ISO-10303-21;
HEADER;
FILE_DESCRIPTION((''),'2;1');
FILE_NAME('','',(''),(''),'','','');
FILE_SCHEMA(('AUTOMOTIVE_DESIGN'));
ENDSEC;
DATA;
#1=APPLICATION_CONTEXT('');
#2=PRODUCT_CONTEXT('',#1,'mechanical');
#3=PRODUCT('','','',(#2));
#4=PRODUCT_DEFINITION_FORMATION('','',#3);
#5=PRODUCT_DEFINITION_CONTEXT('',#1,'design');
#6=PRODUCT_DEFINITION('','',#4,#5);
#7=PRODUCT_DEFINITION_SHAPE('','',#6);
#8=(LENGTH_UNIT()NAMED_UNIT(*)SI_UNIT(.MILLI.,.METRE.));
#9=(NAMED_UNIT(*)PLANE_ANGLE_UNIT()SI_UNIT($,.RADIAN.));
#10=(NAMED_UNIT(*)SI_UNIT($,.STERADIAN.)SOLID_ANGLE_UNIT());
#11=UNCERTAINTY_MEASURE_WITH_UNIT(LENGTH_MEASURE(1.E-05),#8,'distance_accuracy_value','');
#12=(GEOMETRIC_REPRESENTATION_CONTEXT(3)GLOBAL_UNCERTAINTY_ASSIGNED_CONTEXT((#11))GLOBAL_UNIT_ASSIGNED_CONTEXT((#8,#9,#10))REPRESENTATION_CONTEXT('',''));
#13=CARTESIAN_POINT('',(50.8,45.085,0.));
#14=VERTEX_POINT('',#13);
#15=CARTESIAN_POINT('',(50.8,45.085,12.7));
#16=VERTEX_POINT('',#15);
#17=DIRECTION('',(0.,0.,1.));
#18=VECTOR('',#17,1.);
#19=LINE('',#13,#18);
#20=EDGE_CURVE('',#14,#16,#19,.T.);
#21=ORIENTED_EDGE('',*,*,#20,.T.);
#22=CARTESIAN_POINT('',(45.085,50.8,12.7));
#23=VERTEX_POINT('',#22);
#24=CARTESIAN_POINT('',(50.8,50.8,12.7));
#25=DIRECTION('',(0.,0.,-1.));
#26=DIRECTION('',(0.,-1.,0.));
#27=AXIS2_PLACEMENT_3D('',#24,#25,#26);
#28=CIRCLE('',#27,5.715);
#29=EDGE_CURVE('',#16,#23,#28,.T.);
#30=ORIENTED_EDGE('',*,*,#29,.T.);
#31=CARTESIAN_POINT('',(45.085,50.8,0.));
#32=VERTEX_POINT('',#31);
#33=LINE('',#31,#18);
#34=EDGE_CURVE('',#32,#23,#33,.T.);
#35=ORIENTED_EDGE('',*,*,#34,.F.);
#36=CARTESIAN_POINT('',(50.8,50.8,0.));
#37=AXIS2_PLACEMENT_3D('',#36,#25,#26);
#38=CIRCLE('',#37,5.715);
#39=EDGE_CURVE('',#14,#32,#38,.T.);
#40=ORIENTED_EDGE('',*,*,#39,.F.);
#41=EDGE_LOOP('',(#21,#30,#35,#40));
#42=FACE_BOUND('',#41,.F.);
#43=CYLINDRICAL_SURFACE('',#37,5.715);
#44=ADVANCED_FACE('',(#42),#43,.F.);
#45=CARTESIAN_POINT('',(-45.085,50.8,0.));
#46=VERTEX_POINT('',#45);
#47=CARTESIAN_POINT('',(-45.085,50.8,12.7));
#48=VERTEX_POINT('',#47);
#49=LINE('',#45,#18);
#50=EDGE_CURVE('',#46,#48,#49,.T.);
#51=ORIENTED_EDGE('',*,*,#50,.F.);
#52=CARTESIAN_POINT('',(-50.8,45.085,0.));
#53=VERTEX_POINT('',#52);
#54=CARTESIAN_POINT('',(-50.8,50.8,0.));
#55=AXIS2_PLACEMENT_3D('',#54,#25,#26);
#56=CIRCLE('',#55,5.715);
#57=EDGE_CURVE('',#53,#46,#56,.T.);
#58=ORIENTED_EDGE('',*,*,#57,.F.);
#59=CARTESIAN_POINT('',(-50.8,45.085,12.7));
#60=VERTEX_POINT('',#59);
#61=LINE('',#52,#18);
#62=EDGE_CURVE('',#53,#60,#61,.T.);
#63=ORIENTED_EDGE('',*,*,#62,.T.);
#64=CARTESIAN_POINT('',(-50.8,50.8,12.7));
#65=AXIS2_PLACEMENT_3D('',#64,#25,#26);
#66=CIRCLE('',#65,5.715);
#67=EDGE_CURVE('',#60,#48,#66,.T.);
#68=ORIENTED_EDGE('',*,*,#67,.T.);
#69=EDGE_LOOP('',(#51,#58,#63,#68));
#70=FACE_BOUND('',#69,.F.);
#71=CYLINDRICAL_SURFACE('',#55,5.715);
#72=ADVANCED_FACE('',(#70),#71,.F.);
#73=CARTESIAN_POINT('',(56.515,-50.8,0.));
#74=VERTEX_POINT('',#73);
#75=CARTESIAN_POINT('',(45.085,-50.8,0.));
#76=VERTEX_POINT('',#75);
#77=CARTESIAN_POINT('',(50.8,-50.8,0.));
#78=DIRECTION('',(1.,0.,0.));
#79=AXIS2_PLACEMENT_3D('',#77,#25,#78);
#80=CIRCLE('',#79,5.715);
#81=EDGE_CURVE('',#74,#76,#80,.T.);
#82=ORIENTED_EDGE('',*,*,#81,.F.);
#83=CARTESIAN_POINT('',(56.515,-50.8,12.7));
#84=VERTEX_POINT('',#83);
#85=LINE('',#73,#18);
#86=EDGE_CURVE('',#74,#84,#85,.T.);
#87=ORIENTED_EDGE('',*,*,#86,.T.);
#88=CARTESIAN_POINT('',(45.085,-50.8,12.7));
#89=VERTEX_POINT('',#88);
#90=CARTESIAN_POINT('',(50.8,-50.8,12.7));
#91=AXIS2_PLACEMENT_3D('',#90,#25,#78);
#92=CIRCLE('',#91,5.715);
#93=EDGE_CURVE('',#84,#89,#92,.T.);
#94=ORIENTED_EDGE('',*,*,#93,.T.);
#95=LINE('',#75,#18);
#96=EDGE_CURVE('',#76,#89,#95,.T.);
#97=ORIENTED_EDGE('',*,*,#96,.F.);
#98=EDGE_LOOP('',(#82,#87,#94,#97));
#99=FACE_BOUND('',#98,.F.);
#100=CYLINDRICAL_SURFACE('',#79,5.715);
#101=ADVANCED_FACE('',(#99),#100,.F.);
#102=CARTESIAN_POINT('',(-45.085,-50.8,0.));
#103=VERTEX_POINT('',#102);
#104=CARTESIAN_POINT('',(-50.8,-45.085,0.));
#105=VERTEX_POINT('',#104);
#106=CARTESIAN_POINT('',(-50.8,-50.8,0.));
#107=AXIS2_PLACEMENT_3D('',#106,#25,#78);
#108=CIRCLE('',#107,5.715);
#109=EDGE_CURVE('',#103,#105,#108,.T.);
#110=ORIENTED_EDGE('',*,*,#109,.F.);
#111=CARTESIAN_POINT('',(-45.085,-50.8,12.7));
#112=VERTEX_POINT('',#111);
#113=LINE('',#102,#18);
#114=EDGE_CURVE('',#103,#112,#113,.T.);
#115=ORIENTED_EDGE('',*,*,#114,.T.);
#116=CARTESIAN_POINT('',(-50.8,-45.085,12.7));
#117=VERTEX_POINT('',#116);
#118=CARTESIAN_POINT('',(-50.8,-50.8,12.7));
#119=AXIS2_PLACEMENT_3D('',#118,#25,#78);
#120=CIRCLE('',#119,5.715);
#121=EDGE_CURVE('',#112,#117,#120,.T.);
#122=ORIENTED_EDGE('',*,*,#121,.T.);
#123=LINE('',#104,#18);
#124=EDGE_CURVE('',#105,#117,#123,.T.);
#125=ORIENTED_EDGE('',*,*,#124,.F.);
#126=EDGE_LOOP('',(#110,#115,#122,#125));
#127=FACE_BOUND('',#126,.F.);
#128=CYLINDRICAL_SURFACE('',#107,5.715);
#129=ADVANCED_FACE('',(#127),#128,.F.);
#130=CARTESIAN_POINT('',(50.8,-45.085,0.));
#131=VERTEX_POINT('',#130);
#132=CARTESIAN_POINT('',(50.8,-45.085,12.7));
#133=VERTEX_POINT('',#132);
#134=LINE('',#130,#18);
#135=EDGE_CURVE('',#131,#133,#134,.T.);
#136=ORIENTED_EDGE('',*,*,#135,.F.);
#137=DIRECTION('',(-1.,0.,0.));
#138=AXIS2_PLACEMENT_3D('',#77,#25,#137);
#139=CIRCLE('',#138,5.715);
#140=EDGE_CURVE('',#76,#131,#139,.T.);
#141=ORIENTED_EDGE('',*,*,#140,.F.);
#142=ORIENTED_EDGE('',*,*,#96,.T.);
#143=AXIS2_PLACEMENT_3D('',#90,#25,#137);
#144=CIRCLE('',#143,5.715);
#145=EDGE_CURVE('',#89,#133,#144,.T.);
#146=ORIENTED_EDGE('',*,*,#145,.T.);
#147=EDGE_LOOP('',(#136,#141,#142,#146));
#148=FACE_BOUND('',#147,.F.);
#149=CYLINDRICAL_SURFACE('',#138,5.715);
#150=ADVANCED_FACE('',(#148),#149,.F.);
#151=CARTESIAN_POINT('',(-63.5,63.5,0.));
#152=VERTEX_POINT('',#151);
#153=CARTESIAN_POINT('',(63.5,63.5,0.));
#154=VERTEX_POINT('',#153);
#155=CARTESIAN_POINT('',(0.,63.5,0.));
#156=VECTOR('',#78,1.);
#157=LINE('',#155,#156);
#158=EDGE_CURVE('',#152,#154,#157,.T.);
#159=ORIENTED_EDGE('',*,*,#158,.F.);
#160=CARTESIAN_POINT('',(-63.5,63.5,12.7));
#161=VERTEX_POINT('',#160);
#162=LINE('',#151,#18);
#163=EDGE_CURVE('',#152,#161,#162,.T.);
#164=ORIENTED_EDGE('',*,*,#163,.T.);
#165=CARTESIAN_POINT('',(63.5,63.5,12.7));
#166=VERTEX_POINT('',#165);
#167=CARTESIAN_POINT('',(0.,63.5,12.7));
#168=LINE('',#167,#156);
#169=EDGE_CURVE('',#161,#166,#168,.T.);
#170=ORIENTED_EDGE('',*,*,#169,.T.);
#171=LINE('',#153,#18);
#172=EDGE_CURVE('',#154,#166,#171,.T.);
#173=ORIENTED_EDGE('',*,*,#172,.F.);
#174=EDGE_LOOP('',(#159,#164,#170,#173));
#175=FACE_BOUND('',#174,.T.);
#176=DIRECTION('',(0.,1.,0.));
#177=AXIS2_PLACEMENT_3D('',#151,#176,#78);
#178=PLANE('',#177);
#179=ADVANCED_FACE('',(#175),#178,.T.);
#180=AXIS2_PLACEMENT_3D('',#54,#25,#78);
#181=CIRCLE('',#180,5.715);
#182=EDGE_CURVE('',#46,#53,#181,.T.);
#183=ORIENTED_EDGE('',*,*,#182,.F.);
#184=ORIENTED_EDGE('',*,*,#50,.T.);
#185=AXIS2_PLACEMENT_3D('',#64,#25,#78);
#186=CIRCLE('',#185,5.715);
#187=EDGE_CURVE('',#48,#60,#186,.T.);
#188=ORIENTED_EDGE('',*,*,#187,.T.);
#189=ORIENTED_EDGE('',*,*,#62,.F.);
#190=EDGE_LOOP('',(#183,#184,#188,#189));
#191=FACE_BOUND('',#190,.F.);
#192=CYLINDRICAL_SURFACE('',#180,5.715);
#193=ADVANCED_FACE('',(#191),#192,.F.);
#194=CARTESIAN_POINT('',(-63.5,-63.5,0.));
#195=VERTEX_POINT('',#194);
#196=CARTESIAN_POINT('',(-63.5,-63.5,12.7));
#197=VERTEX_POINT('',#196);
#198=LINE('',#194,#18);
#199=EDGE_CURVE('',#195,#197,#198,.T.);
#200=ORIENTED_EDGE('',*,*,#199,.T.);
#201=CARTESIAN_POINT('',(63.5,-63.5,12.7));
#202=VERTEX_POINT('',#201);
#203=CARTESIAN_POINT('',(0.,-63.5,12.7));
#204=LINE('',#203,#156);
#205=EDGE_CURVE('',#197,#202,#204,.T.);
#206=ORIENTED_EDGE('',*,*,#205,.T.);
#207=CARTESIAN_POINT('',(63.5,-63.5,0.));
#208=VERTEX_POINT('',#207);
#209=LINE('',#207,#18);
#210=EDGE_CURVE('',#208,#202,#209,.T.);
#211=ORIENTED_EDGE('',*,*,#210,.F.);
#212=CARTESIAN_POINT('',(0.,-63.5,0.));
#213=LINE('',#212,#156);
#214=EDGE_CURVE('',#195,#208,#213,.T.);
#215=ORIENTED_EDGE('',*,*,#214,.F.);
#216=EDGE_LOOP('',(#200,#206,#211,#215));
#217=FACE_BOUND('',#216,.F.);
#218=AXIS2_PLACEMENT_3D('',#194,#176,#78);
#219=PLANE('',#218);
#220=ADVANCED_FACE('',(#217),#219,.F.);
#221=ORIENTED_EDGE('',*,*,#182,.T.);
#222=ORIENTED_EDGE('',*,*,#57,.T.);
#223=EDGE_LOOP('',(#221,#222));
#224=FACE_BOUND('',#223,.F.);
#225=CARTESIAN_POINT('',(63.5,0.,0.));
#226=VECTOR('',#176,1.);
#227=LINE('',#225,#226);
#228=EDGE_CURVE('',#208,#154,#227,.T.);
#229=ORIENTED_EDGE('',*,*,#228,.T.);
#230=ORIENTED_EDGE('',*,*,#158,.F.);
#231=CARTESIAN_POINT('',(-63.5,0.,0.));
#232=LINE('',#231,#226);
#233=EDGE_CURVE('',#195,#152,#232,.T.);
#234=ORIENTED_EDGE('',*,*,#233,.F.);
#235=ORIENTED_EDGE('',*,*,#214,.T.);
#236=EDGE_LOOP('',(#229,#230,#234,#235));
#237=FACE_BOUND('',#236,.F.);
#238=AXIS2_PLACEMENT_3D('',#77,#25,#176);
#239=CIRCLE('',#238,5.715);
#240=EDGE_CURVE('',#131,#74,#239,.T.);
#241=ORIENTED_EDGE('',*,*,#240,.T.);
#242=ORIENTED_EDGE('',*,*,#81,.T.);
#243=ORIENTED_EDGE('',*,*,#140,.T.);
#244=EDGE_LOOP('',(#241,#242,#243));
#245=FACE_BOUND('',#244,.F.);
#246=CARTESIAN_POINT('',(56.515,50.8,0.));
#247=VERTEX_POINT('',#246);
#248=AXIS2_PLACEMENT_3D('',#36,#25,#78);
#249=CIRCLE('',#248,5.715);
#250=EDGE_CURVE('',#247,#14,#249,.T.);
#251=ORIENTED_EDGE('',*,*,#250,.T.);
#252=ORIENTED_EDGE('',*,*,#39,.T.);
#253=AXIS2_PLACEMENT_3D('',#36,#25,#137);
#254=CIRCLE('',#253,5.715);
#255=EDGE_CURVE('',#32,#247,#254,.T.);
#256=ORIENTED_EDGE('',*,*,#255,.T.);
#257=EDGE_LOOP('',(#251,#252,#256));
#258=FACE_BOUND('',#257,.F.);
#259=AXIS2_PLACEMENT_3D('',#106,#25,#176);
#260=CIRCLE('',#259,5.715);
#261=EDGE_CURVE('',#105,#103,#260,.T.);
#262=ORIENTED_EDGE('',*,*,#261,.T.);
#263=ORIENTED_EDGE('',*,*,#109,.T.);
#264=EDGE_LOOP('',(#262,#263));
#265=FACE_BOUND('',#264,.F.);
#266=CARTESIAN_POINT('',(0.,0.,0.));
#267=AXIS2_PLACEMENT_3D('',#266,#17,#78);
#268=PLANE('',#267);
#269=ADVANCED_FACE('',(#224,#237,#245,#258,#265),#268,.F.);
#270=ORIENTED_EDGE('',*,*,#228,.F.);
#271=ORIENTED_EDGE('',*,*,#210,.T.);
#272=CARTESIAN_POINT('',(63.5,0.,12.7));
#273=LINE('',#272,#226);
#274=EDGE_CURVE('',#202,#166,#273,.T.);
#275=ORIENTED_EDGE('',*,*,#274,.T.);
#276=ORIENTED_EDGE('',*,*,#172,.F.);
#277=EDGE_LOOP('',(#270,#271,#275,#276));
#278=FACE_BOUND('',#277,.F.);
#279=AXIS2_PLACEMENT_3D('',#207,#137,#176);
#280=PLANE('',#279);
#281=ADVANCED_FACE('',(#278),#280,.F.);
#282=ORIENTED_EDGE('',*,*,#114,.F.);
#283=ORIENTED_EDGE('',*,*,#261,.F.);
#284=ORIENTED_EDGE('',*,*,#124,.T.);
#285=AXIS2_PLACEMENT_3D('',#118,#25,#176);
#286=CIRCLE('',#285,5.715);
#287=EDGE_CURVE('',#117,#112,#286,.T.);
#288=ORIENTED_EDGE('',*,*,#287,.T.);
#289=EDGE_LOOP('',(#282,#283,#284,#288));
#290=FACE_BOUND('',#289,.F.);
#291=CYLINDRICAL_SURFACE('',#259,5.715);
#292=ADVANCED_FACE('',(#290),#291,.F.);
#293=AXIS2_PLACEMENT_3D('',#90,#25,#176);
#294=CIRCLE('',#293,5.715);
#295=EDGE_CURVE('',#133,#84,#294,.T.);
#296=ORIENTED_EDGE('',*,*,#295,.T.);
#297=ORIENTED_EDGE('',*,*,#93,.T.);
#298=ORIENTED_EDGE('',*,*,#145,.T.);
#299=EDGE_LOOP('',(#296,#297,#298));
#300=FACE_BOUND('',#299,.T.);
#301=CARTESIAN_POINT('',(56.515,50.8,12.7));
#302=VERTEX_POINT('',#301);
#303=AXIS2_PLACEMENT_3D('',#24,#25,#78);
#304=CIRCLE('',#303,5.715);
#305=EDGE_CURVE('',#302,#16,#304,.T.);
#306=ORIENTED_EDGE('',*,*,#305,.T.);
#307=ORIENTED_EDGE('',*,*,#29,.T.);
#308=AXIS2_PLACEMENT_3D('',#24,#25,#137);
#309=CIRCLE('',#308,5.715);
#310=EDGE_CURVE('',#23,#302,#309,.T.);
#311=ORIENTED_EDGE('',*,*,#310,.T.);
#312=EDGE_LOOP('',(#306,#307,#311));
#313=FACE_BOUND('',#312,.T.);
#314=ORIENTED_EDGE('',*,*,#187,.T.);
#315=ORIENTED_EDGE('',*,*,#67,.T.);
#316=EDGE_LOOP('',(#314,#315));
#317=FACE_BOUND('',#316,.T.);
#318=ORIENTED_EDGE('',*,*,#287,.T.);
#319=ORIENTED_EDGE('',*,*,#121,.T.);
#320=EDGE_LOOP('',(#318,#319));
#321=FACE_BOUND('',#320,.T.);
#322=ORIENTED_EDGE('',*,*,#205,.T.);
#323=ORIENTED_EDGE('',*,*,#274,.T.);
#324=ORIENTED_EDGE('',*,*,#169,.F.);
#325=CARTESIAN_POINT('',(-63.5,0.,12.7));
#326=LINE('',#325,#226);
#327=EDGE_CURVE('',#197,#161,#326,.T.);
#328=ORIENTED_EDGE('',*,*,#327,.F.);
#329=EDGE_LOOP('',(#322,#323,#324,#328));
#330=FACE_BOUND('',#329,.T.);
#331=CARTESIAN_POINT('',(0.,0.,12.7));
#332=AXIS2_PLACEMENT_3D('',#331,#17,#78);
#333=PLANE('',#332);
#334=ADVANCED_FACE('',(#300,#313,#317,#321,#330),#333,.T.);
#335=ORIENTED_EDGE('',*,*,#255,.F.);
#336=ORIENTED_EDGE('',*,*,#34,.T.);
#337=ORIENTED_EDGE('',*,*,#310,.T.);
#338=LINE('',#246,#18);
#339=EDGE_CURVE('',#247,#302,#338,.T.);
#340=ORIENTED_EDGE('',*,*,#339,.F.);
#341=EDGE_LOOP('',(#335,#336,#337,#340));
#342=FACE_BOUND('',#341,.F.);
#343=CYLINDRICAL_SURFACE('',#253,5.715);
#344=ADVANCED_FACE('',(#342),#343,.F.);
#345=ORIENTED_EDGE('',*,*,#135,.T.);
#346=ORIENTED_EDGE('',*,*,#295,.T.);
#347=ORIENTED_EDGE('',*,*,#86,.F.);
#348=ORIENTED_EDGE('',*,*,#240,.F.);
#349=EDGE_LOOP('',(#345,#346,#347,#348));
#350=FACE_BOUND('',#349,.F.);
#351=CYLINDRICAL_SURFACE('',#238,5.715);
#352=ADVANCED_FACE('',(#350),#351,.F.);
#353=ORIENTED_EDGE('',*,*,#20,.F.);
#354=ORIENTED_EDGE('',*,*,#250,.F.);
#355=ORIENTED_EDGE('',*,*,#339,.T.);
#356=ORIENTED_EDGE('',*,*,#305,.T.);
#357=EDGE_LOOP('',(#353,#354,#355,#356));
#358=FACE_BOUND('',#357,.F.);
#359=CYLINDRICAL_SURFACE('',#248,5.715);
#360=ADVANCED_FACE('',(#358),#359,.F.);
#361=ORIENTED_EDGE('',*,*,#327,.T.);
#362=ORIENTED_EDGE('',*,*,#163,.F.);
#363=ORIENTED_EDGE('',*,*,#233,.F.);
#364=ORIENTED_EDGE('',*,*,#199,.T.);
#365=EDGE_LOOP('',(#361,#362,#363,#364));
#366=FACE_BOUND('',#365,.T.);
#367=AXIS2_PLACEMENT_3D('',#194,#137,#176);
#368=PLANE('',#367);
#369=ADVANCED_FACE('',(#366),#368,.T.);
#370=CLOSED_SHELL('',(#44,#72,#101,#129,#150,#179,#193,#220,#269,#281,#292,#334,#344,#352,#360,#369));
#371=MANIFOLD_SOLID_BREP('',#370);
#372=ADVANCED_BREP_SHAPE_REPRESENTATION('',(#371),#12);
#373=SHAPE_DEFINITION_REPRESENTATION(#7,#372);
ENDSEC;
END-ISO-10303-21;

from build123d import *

# Parameters (mm, degrees)
F0_W     = 127
F0_H     = 127
F2_DEPTH = 12.7


# Not quite as in the source:
# - the program builds the solid bodies; features that only make, move or delete a surface that nothing else refers to are left out


with BuildPart() as f2:
    # F0 (on Top) → F2 (new body)
    with BuildSketch(Plane.XY):
        Rectangle(F0_W, F0_H)
        with BuildLine():
            ThreePointArc((-50.8, 45.085), (-54.8411152545, 54.8411152545), (-45.085, 50.8))
            Line((-45.085, 50.8), (45.085, 50.8))
            ThreePointArc((45.085, 50.8), (50.8, 56.515), (56.515, 50.8))
            ThreePointArc((56.515, 50.8), (54.8411152545, 46.7588847455), (50.8, 45.085))
            Line((50.8, 45.085), (50.8, -45.085))
            ThreePointArc((50.8, -45.085), (54.8411152545, -46.7588847455), (56.515, -50.8))
            ThreePointArc((56.515, -50.8), (50.8, -56.515), (45.085, -50.8))
            Line((45.085, -50.8), (-45.085, -50.8))
            ThreePointArc((-45.085, -50.8), (-54.8411152545, -54.8411152545), (-50.8, -45.085))
            Line((-50.8, -45.085), (-50.8, 45.085))
        make_face(mode=Mode.SUBTRACT)
        with BuildLine():
            Line((45.085, 50.8), (-45.085, 50.8))
            ThreePointArc((-45.085, 50.8), (-46.7588847455, 46.7588847455), (-50.8, 45.085))
            Line((-50.8, 45.085), (-50.8, -45.085))
            ThreePointArc((-50.8, -45.085), (-46.7588847455, -46.7588847455), (-45.085, -50.8))
            Line((-45.085, -50.8), (45.085, -50.8))
            ThreePointArc((45.085, -50.8), (46.7588847455, -46.7588847455), (50.8, -45.085))
            Line((50.8, -45.085), (50.8, 45.085))
            ThreePointArc((50.8, 45.085), (46.7588847455, 46.7588847455), (45.085, 50.8))
        make_face()
    extrude(amount=F2_DEPTH)


solid = f2.part
